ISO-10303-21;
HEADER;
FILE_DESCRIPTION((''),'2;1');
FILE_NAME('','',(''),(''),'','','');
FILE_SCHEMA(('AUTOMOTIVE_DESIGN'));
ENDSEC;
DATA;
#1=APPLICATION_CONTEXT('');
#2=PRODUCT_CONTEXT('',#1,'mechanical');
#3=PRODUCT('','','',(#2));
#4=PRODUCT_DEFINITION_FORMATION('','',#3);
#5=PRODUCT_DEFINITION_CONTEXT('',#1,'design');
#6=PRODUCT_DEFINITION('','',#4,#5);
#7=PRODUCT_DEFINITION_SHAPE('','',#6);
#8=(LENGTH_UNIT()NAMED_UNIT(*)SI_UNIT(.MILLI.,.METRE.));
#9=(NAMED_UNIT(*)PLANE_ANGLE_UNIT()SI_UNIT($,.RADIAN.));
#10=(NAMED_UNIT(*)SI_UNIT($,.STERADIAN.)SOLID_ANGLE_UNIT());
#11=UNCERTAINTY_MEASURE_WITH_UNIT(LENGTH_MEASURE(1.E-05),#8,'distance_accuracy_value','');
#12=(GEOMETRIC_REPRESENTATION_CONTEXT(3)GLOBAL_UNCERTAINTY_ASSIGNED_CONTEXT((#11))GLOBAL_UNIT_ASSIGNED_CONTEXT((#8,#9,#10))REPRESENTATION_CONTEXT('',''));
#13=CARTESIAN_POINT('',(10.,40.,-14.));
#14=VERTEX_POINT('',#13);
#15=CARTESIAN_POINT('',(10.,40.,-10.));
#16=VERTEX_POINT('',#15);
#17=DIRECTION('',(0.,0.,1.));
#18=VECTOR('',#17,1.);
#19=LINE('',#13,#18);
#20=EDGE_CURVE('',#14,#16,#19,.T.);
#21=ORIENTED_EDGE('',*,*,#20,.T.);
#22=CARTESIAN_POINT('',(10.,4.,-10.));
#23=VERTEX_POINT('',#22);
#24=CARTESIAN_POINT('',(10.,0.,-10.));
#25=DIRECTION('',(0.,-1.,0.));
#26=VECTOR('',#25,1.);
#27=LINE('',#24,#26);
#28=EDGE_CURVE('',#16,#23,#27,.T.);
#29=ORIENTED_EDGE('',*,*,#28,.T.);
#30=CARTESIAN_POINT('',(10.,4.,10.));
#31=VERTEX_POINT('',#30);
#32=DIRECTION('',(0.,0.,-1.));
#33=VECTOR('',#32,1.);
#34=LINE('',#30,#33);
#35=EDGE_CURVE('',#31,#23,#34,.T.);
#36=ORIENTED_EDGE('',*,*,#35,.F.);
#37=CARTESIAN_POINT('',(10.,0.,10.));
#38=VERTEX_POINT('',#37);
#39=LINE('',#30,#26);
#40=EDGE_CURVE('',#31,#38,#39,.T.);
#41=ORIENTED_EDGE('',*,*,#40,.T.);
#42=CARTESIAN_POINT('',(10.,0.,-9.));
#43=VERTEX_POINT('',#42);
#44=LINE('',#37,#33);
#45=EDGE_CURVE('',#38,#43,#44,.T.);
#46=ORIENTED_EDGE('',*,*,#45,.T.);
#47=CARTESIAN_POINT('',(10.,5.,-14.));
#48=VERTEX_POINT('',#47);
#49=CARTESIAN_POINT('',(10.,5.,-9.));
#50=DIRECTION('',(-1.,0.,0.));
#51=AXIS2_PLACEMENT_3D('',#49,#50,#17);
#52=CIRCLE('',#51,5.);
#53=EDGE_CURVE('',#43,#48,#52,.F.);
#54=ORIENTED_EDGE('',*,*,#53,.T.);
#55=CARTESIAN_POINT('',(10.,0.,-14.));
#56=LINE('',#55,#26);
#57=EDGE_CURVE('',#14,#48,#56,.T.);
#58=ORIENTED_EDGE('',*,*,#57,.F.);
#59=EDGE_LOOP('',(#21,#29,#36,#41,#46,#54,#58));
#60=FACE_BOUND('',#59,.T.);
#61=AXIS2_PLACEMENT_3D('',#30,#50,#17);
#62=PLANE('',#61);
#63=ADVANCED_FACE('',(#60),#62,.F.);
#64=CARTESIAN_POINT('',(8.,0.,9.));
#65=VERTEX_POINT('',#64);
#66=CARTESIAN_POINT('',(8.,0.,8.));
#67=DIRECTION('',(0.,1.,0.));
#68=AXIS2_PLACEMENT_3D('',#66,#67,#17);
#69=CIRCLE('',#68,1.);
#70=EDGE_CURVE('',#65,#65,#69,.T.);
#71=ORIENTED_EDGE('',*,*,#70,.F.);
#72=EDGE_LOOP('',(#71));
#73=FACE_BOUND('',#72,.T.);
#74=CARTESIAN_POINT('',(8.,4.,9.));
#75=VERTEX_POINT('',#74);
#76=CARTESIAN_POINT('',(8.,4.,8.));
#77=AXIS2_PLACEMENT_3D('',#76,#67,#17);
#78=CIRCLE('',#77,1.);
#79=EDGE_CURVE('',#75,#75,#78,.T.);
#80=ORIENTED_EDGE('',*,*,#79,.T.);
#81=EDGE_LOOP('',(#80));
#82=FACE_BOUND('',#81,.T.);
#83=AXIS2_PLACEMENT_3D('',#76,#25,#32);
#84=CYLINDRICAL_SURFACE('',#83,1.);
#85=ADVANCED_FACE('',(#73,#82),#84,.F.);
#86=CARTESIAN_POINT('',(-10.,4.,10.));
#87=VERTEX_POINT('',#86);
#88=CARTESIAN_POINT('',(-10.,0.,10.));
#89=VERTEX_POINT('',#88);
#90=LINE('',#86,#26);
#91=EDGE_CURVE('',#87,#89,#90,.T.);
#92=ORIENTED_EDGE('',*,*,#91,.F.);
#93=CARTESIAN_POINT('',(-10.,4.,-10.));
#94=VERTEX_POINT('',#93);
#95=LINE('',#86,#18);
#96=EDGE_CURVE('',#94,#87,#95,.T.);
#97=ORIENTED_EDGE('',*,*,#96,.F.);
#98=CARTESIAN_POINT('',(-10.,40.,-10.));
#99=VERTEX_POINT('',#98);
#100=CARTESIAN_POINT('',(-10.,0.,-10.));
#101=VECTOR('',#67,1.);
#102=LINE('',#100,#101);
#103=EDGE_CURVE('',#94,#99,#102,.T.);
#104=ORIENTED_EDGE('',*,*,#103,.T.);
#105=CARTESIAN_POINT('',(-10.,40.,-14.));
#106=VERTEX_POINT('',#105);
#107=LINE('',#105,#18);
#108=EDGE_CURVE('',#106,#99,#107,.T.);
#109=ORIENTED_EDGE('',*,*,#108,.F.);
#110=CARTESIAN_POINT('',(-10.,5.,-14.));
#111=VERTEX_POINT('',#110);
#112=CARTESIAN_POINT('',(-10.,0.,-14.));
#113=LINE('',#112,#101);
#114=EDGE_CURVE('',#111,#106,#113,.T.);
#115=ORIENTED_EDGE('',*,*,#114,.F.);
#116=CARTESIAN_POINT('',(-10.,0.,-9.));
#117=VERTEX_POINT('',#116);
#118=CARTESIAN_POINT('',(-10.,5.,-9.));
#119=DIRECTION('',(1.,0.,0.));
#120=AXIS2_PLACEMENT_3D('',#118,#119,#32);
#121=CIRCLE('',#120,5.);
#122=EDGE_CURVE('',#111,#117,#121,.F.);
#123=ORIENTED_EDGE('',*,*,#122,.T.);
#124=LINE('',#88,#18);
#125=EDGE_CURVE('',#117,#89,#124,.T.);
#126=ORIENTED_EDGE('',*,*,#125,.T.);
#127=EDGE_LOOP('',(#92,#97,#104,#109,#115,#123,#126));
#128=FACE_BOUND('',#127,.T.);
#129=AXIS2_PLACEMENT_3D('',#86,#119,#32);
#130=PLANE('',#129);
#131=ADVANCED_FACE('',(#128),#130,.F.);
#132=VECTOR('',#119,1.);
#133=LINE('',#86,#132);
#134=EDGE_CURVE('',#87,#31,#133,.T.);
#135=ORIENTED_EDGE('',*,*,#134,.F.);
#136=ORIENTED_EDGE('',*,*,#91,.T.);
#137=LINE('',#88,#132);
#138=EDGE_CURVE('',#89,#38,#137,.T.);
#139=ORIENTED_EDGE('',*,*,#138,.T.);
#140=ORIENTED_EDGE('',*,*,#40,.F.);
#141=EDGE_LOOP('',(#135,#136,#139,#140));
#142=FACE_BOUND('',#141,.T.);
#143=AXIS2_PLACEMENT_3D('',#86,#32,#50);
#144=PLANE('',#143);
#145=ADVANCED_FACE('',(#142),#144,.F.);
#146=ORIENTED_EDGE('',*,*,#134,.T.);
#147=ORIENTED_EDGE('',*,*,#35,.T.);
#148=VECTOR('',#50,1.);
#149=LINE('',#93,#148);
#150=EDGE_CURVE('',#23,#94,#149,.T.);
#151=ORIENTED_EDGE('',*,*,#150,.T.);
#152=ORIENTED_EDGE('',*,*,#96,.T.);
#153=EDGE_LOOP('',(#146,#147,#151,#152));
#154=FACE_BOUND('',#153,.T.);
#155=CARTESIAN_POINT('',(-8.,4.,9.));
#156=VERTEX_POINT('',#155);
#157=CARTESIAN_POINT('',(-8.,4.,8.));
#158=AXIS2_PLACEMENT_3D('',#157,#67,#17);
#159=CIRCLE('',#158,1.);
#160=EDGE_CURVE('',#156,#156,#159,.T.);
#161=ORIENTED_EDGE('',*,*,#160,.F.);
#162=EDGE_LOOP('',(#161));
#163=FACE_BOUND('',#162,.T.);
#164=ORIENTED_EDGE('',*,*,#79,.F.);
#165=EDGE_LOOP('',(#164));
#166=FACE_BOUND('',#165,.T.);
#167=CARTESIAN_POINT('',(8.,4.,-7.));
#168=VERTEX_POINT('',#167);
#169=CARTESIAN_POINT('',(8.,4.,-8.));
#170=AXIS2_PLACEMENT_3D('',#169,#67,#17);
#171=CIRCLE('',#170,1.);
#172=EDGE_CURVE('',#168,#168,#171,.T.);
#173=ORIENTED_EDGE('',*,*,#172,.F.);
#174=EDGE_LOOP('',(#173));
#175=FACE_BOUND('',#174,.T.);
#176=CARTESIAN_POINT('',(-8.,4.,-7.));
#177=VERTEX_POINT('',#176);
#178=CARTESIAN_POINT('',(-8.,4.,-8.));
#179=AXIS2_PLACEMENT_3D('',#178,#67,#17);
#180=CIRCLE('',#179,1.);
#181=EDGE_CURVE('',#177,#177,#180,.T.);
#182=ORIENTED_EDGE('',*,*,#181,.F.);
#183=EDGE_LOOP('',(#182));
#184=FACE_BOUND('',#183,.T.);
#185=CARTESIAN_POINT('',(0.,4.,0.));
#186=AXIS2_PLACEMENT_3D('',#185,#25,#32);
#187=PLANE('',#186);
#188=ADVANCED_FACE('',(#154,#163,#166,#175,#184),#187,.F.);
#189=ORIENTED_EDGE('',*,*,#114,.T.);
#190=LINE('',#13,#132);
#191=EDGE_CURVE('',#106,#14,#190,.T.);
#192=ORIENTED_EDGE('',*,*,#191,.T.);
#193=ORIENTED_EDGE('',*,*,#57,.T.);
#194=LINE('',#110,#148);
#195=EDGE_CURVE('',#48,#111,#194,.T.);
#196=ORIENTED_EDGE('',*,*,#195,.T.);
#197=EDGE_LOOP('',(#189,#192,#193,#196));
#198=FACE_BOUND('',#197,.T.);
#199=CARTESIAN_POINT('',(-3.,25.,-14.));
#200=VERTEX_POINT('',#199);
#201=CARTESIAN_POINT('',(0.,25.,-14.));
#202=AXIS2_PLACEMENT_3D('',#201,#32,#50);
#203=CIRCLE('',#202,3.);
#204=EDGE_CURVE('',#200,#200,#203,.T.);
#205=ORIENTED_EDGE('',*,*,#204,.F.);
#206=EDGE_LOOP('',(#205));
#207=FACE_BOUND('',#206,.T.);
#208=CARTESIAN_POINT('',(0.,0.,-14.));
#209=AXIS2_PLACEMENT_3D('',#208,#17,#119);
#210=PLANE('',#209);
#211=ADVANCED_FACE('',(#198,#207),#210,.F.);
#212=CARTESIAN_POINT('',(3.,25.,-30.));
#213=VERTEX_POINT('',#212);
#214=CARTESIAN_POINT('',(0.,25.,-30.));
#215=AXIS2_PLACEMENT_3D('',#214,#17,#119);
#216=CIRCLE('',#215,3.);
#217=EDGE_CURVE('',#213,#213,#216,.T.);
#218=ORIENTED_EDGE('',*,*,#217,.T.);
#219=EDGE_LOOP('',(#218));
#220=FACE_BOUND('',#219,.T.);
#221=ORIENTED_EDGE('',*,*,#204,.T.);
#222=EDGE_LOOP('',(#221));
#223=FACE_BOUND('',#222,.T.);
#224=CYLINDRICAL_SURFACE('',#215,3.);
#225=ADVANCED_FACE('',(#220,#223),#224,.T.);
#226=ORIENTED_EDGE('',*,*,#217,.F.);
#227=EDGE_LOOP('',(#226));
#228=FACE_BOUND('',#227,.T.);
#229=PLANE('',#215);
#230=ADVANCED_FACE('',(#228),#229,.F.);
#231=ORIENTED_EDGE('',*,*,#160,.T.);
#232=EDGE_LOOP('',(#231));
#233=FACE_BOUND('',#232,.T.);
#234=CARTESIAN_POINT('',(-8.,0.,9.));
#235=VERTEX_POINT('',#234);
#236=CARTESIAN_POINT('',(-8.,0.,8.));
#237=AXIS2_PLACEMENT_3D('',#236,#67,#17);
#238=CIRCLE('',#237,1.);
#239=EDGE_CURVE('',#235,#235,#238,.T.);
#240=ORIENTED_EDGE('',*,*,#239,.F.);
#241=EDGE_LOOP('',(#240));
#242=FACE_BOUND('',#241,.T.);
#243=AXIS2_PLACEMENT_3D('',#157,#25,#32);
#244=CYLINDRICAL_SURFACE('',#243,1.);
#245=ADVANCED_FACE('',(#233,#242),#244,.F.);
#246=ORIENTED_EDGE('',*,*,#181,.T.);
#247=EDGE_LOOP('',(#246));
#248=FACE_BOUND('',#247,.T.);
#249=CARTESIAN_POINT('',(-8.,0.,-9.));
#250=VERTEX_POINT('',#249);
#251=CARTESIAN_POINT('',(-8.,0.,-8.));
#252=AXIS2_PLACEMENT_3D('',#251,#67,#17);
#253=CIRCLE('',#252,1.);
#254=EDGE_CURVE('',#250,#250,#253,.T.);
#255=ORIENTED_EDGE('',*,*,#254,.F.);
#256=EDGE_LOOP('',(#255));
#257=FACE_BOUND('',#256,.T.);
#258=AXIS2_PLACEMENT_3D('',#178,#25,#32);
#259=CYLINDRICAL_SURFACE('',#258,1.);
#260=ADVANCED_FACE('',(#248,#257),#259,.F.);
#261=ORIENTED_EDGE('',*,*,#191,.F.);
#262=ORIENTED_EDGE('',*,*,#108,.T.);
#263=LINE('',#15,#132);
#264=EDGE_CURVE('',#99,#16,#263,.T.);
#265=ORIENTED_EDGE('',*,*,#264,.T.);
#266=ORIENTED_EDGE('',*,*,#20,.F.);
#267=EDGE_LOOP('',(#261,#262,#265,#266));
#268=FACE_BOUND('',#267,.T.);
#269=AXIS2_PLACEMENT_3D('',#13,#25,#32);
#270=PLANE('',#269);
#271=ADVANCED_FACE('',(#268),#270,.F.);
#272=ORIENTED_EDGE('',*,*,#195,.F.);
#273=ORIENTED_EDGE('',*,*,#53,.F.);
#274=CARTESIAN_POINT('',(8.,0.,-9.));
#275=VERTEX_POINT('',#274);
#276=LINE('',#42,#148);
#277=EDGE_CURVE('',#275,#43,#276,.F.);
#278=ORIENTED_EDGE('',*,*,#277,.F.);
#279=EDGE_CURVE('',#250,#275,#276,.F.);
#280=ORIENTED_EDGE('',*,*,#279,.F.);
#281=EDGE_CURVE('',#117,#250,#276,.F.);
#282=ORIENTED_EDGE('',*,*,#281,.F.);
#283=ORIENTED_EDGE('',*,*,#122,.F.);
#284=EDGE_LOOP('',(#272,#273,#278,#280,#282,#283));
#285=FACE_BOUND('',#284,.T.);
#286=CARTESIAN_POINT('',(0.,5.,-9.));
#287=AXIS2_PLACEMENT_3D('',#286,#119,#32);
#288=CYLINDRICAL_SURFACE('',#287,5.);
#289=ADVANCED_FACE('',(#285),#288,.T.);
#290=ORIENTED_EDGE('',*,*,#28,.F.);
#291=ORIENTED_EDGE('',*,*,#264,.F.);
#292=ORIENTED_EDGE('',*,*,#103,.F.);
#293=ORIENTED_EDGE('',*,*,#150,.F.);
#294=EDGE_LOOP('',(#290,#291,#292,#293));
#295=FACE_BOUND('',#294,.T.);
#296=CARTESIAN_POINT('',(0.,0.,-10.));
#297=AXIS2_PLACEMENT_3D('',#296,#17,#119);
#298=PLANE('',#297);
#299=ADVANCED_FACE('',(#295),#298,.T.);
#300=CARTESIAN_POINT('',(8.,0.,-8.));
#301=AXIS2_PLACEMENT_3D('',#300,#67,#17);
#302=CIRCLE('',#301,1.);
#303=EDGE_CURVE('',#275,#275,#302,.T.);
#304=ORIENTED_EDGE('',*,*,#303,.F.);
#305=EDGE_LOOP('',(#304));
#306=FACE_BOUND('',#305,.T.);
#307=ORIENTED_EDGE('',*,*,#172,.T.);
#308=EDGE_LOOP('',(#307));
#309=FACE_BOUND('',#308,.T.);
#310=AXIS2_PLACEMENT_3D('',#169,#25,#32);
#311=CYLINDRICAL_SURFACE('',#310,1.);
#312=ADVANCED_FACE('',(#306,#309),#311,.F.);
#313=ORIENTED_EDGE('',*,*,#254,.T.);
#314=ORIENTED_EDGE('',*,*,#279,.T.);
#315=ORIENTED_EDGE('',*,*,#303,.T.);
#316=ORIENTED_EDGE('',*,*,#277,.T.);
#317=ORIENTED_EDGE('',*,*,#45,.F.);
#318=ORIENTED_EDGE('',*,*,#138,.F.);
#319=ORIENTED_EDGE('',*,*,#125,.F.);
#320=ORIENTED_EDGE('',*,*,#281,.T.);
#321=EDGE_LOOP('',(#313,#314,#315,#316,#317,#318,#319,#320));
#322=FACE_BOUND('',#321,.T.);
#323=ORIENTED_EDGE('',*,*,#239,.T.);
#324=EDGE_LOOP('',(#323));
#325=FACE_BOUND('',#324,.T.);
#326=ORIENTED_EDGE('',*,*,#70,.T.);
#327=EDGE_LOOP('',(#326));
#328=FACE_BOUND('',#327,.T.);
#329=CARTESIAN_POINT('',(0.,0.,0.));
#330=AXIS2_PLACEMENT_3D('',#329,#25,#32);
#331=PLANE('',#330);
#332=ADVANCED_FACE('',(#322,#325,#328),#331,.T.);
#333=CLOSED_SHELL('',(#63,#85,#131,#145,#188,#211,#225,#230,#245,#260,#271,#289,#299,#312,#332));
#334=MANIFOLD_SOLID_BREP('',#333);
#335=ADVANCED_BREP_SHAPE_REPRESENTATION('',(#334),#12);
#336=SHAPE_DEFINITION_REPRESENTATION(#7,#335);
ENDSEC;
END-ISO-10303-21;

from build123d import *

# Parameters (mm, degrees)
SKETCH1_W           = 20
SKETCH1_H           = 20
SKETCH1_R           = 1
SKETCH1_R_2         = 0.9999999999999998
SKETCH1_R_3         = 1.0000000000000013
SKETCH1_R_4         = 0.9999999999999996
BOSS_EXTRUDE1_DEPTH = 4
SKETCH2_W           = 20
SKETCH2_H           = 40
SKETCH2_R           = 2.9999999999999996
BOSS_EXTRUDE2_DEPTH = 4
FILLET1_R           = 5
SKETCH3_R           = 2.9999999999999996
BOSS_EXTRUDE3_DEPTH = 20


with BuildPart() as part:
    # Sketch1 → Boss-Extrude1 (new body)
    with BuildSketch(Plane(origin=(0, 0, 0), x_dir=(1, 0, 0), z_dir=(0, 1, 0))):
        Rectangle(SKETCH1_W, SKETCH1_H)
        with Locations((-8.000000000000002, 8.000000000000002)):
            Circle(SKETCH1_R, mode=Mode.SUBTRACT)
        with Locations((-8.000000000000002, -7.999999999999998)):
            Circle(SKETCH1_R_2, mode=Mode.SUBTRACT)
        with Locations((7.999999999999998, -7.999999999999998)):
            Circle(SKETCH1_R_3, mode=Mode.SUBTRACT)
        with Locations((8, 8.000000000000002)):
            Circle(SKETCH1_R_4, mode=Mode.SUBTRACT)
    extrude(amount=BOSS_EXTRUDE1_DEPTH)

    # Sketch2 → Boss-Extrude2 (add)
    with BuildSketch(Plane(origin=(0, 0, -10.000000000000002), x_dir=(-1, 0, 0), z_dir=(0, 0, -1))):
        with Locations((1.78e-15, 20)):
            Rectangle(SKETCH2_W, SKETCH2_H)
        with Locations((0, 25)):
            Circle(SKETCH2_R, mode=Mode.SUBTRACT)
    extrude(amount=BOSS_EXTRUDE2_DEPTH)

    # Fillet1
    fillet1_edges = [part.edges().sort_by_distance(p)[0] for p in [
        (-1.78e-15, 0, -14.000000000000002),
    ]]
    fillet(fillet1_edges, radius=FILLET1_R)

    # Sketch3 → Boss-Extrude3 (add)
    with BuildSketch(Plane.XY.offset(-10.000000000000002)):
        with Locations((0, 25)):
            Circle(SKETCH3_R)
    extrude(amount=-BOSS_EXTRUDE3_DEPTH)


solid = part.part
